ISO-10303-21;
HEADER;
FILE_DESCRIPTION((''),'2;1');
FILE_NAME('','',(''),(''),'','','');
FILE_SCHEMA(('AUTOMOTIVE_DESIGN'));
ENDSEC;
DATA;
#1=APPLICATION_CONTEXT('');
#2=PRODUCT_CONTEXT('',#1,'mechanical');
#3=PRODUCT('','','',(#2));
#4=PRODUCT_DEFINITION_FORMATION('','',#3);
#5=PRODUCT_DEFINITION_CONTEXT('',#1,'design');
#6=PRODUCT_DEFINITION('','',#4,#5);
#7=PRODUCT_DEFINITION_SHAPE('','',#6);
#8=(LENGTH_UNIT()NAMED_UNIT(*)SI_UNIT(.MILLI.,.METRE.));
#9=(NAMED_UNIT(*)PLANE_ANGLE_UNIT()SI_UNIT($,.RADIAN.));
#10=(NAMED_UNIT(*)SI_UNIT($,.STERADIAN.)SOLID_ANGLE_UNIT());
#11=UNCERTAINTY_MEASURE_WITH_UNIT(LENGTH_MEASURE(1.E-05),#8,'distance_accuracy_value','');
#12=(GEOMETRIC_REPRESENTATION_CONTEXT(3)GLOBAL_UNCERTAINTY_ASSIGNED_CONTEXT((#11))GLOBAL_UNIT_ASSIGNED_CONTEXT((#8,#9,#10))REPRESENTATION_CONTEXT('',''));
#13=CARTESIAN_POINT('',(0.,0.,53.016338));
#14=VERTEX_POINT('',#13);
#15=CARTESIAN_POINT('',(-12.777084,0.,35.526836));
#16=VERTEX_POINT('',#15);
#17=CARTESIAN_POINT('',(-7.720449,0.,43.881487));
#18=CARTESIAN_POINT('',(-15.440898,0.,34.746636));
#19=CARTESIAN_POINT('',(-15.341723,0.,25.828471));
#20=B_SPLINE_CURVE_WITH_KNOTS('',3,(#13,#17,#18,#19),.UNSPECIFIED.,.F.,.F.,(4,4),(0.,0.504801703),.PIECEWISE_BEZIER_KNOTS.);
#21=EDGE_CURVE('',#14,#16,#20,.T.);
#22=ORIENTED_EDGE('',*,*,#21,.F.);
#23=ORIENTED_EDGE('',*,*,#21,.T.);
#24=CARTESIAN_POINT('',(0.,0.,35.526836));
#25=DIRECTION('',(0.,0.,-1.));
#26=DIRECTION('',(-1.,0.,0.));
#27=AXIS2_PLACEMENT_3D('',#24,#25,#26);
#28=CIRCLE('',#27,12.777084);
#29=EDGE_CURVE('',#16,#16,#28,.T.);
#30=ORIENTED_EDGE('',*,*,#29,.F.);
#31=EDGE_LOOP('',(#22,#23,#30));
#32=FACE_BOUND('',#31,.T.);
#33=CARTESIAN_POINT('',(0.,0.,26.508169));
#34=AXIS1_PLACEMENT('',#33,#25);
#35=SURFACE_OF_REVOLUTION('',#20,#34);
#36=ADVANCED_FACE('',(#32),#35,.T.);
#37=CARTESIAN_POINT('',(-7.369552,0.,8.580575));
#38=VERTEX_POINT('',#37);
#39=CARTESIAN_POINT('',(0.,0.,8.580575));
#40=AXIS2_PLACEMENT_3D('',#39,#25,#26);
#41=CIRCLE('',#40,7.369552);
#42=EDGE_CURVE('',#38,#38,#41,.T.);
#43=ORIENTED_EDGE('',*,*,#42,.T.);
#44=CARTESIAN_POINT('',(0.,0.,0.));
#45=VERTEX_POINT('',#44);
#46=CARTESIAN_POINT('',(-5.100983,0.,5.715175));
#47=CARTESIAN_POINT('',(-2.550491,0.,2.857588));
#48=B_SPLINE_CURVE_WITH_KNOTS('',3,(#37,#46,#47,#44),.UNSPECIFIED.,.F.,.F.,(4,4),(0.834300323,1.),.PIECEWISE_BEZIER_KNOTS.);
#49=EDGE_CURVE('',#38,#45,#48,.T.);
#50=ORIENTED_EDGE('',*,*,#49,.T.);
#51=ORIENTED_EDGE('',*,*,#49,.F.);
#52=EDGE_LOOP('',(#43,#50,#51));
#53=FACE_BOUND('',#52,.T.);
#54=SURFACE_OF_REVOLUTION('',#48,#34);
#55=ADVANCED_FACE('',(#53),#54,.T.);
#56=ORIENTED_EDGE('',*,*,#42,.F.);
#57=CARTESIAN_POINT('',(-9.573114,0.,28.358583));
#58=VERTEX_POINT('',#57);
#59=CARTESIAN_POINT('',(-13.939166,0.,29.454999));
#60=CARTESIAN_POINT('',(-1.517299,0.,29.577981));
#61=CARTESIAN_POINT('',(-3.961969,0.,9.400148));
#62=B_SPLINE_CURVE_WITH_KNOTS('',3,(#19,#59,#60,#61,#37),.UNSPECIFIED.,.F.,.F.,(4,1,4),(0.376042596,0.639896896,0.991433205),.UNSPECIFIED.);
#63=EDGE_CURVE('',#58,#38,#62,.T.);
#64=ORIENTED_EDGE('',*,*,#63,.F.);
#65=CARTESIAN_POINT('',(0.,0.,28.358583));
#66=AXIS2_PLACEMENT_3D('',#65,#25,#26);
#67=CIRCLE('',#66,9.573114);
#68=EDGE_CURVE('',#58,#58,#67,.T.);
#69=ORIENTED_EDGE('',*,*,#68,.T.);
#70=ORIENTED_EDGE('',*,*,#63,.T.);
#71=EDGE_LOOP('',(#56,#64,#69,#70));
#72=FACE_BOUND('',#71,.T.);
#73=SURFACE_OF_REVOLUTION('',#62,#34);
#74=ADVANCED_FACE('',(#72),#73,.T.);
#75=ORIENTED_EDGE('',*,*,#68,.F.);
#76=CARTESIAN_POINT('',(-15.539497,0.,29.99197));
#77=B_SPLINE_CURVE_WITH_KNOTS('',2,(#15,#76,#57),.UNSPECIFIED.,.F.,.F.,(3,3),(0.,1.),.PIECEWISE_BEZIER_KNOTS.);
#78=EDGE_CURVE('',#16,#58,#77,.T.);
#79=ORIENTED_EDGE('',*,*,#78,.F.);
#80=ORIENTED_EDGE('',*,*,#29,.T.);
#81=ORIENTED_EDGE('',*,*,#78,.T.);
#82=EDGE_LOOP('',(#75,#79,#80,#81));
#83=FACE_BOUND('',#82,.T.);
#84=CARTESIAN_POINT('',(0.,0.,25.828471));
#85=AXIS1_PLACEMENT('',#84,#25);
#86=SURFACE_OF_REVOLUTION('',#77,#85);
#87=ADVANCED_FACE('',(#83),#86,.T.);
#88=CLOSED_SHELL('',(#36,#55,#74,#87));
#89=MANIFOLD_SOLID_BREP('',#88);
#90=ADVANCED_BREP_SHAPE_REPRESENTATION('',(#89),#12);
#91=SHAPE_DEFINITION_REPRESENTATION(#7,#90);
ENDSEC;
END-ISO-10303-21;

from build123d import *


# Not quite as in the source:
# - a fillet or chamfer that OpenCascade refuses, or shapes differently, is made with other operations: its cross-section is extruded or revolved along the edge and cut away or added


with BuildPart() as f1:
    # F0 (on Front) → F1 (revolve)
    with BuildSketch(Plane.XZ):
        with BuildLine():
            Line((0, 0), (0, 53.0163384974))
            add(Edge.make_bspline(
                [(0, 53.0163384974), (-7.7204488092, 43.8814871891), (-15.4408976031, 34.7466358989), (-15.3417233382, 25.8284714426)],
                knots=[0, 0, 0, 0, 0.5048017032, 0.5048017032, 0.5048017032, 0.5048017032], degree=3))
            add(Edge.make_bspline(
                [(-15.3417233186, 25.8284714568), (-13.9391664267, 29.4549986533), (-1.5172985659, 29.5779810102), (-3.9619687384, 9.400148093), (-7.3695517839, 8.5805750916)],
                knots=[0.3760425959, 0.3760425959, 0.3760425959, 0.3760425959, 0.6398968964, 0.991433205, 0.991433205, 0.991433205, 0.991433205], degree=3))
            add(Edge.make_bspline(
                [(-7.3695517819, 8.5805751172), (-5.1009829868, 5.7151752374), (-2.5504914934, 2.8575876187), (0, 0)],
                knots=[0.8343003226, 0.8343003226, 0.8343003226, 0.8343003226, 1, 1, 1, 1], degree=3))
        make_face()
    revolve(axis=Axis((0, 0, 26.5081692487), (0, 0, -1)))

    # F2: fillet of radius 5.08 on 1 edges, made by hand

    # F2_s1 → F2_t2 (revolve, cut)
    with BuildSketch(Plane.XZ):
        with BuildLine():
            add(Edge.make_bspline(
                [(-12.7770843094, 35.5268361891), (-15.539496918, 29.9919695065), (-9.5731143471, 28.3585829531)],
                knots=[0, 0, 0, 1, 1, 1], degree=2, weights=[1, 1, 1]))
            Line((-9.5731143471, 28.3585829531), (-9.5999417115, 28.2605888078))
            ThreePointArc((-9.5999417115, 28.2605888078), (-12.8599796885, 28.1560554661), (-15.2469633294, 25.7918230855))
            Line((-15.2469633294, 25.7918230855), (-15.4433170468, 25.8273416789))
            ThreePointArc((-15.4433170468, 25.8273416789), (-14.7296425373, 30.8674166322), (-12.8679910731, 35.5722071085))
            Line((-12.8679910731, 35.5722071085), (-12.7770843094, 35.5268361891))
        make_face()
    revolve(axis=Axis((0, 0, 25.8284714497), (0, 0, -1)), mode=Mode.SUBTRACT)


solid = f1.part
